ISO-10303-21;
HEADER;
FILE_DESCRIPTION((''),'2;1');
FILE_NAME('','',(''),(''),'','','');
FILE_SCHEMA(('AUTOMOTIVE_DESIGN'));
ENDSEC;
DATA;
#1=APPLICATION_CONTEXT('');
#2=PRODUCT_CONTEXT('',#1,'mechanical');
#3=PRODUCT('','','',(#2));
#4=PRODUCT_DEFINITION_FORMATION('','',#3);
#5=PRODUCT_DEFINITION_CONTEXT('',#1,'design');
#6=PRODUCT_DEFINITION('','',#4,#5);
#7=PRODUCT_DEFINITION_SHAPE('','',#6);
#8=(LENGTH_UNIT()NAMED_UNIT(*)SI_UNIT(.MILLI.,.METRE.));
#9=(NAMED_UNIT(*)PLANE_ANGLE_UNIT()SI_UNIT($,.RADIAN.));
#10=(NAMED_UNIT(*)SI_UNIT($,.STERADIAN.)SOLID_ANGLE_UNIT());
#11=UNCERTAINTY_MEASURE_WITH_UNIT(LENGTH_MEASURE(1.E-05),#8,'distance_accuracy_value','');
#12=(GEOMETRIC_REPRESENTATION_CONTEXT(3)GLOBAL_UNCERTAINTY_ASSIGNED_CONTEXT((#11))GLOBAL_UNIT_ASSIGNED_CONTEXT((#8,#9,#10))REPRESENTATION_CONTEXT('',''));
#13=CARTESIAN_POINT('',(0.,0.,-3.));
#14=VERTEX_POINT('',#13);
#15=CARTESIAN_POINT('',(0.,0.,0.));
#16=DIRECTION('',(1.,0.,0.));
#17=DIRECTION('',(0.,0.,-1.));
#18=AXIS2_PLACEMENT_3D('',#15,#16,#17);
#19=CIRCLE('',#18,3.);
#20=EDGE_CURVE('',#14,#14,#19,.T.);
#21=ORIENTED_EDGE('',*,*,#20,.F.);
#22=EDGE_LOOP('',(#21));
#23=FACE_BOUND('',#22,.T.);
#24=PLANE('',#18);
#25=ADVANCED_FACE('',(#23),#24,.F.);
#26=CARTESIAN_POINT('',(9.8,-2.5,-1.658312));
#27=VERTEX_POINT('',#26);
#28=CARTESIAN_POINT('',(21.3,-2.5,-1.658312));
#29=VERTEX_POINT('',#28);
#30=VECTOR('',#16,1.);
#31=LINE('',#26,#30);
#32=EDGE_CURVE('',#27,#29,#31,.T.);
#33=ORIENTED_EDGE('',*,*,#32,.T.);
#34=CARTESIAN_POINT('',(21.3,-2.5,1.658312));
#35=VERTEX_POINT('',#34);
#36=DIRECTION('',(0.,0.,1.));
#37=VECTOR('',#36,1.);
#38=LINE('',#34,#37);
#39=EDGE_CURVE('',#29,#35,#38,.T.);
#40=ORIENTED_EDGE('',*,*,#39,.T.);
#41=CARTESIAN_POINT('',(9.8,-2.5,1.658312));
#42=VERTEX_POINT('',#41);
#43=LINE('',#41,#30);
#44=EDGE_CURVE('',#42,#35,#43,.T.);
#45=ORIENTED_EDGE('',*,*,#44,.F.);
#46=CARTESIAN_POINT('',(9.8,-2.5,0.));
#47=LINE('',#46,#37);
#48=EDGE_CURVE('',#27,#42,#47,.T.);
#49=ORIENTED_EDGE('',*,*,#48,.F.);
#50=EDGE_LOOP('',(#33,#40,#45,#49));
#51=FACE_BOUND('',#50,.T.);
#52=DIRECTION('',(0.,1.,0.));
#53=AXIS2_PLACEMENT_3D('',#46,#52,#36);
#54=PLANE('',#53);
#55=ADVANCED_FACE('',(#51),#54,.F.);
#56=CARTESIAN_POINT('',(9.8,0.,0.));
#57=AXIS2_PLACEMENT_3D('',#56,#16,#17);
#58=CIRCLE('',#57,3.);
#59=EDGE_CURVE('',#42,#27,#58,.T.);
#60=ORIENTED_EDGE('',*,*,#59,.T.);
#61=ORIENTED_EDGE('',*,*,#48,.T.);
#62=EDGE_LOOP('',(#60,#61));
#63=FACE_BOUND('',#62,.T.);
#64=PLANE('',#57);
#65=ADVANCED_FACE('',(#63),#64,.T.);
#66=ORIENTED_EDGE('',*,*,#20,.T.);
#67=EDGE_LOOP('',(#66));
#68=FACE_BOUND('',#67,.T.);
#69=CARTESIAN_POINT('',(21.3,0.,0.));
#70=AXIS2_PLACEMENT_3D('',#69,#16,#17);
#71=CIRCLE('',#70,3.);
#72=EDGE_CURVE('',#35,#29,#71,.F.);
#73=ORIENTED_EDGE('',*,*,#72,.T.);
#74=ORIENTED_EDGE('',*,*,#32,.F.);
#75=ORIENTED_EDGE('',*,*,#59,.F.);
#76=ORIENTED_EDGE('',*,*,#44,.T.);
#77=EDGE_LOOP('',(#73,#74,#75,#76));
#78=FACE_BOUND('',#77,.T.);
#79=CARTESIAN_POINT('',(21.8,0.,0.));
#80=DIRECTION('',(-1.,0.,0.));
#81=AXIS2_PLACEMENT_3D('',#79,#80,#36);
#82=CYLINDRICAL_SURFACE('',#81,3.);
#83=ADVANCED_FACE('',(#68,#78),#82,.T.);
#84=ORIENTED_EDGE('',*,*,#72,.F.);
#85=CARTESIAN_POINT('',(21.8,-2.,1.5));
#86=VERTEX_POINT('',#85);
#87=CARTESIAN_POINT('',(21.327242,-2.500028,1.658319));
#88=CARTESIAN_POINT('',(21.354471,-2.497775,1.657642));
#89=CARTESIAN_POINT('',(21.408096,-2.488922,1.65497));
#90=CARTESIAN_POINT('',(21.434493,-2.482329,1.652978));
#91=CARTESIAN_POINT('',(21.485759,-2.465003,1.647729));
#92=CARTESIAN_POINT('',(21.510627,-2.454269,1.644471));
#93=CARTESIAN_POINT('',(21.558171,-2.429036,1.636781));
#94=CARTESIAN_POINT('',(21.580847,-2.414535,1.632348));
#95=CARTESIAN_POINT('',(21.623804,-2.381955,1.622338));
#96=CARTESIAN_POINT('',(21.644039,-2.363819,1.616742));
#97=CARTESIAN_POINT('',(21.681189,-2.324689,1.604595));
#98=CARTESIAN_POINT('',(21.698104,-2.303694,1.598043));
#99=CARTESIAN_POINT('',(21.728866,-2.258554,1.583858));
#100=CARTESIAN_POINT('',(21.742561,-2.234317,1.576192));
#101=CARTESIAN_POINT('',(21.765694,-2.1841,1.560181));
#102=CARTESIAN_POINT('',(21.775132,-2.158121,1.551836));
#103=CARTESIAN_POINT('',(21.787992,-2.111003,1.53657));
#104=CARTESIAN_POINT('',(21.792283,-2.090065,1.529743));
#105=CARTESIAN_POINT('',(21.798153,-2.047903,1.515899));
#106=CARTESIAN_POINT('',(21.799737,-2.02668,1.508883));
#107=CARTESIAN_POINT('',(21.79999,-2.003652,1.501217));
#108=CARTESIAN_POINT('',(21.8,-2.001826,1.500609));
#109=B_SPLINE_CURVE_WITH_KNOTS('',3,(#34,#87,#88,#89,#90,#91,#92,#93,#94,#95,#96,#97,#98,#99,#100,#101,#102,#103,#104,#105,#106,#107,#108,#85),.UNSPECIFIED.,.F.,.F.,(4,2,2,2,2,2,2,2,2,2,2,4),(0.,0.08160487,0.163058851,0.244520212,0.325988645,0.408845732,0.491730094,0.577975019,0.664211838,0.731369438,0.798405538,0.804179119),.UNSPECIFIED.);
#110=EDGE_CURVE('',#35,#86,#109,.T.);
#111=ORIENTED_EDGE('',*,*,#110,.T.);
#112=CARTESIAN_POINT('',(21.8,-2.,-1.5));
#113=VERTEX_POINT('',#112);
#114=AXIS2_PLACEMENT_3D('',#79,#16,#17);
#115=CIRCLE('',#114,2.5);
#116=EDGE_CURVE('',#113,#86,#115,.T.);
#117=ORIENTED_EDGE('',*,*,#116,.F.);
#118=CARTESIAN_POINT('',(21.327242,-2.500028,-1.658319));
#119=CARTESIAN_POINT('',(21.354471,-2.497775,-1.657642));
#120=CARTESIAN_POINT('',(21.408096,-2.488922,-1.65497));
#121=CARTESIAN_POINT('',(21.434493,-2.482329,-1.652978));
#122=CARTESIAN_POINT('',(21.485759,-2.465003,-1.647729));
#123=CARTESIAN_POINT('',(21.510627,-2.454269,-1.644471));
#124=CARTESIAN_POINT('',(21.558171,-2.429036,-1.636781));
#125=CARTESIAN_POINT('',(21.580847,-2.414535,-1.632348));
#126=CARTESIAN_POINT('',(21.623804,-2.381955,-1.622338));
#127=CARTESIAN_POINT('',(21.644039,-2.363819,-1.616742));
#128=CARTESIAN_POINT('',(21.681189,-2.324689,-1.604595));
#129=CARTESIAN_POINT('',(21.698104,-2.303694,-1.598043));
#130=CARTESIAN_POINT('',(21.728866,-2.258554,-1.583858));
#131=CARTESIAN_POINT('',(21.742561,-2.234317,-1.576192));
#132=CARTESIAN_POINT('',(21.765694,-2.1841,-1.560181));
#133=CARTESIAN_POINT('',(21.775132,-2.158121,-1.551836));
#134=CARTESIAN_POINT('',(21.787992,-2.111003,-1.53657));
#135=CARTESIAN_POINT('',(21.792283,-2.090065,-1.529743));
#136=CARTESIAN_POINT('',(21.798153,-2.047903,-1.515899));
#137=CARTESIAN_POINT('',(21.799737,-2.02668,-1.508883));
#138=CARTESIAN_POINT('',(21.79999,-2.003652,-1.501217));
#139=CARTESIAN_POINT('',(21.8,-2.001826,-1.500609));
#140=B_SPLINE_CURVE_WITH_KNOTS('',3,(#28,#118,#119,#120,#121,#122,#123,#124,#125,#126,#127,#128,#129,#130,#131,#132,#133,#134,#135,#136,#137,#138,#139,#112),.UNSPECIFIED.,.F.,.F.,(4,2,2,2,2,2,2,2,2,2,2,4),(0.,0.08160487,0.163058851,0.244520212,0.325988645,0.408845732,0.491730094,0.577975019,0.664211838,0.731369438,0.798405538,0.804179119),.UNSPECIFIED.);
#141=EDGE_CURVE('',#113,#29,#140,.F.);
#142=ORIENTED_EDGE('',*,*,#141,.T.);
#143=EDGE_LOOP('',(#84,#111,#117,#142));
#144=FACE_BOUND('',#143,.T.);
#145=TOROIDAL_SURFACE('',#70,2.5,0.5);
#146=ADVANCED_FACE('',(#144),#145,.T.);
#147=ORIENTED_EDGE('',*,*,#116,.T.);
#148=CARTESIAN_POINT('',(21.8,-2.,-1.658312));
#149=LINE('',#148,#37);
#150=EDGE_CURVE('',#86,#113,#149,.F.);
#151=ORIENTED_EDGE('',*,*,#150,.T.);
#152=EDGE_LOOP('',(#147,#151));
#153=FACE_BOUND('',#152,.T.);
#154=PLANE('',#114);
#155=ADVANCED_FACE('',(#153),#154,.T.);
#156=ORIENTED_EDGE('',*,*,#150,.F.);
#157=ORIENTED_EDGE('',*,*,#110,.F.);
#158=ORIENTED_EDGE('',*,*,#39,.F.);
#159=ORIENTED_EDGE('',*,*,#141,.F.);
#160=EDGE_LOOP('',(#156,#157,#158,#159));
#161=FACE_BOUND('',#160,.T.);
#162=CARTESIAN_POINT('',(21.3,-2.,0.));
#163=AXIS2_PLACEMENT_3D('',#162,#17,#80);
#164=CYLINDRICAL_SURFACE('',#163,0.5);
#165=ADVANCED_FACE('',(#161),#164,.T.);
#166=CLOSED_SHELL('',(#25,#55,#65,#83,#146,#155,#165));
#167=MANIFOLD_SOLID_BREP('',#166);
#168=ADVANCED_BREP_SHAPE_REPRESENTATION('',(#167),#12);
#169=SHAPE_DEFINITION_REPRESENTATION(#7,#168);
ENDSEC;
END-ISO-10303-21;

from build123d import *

# Parameters (mm, degrees)
SKETCH1_R           = 3
BOSS_EXTRUDE1_DEPTH = 21.8
CUT_EXTRUDE2_START  = -12
CUT_EXTRUDE2_DEPTH  = 12
FILLET1_R           = 0.5


with BuildPart() as part:
    # Sketch1 → Boss-Extrude1 (new body)
    with BuildSketch(Plane(origin=(0, 0, 0), x_dir=(0, 0, -1), z_dir=(1, 0, 0))):
        Circle(SKETCH1_R)
    extrude(amount=BOSS_EXTRUDE1_DEPTH)

    # Sketch2 → Cut-Extrude2 (cut)
    with BuildSketch(Plane(origin=(21.8, 0, 0), x_dir=(0, 0, -1), z_dir=(1, 0, 0)).offset(CUT_EXTRUDE2_START)):
        with BuildLine():
            Line((0, -2.5), (-1.658312395, -2.5))
            ThreePointArc((-1.658312395, -2.5), (0, -3), (1.658312395, -2.5))
            Line((1.658312395, -2.5), (0, -2.5))
        make_face()
    extrude(amount=CUT_EXTRUDE2_DEPTH, mode=Mode.SUBTRACT)

    # Fillet1
    fillet1_edges = [part.edges().sort_by_distance(p)[0] for p in [
        (21.8, 2.643382037, 1.418637165),
        (21.8, -2.5, 0),
    ]]
    fillet(fillet1_edges, radius=FILLET1_R - 0.0001)  # a hair under: the kernel refuses the full size


solid = part.part
